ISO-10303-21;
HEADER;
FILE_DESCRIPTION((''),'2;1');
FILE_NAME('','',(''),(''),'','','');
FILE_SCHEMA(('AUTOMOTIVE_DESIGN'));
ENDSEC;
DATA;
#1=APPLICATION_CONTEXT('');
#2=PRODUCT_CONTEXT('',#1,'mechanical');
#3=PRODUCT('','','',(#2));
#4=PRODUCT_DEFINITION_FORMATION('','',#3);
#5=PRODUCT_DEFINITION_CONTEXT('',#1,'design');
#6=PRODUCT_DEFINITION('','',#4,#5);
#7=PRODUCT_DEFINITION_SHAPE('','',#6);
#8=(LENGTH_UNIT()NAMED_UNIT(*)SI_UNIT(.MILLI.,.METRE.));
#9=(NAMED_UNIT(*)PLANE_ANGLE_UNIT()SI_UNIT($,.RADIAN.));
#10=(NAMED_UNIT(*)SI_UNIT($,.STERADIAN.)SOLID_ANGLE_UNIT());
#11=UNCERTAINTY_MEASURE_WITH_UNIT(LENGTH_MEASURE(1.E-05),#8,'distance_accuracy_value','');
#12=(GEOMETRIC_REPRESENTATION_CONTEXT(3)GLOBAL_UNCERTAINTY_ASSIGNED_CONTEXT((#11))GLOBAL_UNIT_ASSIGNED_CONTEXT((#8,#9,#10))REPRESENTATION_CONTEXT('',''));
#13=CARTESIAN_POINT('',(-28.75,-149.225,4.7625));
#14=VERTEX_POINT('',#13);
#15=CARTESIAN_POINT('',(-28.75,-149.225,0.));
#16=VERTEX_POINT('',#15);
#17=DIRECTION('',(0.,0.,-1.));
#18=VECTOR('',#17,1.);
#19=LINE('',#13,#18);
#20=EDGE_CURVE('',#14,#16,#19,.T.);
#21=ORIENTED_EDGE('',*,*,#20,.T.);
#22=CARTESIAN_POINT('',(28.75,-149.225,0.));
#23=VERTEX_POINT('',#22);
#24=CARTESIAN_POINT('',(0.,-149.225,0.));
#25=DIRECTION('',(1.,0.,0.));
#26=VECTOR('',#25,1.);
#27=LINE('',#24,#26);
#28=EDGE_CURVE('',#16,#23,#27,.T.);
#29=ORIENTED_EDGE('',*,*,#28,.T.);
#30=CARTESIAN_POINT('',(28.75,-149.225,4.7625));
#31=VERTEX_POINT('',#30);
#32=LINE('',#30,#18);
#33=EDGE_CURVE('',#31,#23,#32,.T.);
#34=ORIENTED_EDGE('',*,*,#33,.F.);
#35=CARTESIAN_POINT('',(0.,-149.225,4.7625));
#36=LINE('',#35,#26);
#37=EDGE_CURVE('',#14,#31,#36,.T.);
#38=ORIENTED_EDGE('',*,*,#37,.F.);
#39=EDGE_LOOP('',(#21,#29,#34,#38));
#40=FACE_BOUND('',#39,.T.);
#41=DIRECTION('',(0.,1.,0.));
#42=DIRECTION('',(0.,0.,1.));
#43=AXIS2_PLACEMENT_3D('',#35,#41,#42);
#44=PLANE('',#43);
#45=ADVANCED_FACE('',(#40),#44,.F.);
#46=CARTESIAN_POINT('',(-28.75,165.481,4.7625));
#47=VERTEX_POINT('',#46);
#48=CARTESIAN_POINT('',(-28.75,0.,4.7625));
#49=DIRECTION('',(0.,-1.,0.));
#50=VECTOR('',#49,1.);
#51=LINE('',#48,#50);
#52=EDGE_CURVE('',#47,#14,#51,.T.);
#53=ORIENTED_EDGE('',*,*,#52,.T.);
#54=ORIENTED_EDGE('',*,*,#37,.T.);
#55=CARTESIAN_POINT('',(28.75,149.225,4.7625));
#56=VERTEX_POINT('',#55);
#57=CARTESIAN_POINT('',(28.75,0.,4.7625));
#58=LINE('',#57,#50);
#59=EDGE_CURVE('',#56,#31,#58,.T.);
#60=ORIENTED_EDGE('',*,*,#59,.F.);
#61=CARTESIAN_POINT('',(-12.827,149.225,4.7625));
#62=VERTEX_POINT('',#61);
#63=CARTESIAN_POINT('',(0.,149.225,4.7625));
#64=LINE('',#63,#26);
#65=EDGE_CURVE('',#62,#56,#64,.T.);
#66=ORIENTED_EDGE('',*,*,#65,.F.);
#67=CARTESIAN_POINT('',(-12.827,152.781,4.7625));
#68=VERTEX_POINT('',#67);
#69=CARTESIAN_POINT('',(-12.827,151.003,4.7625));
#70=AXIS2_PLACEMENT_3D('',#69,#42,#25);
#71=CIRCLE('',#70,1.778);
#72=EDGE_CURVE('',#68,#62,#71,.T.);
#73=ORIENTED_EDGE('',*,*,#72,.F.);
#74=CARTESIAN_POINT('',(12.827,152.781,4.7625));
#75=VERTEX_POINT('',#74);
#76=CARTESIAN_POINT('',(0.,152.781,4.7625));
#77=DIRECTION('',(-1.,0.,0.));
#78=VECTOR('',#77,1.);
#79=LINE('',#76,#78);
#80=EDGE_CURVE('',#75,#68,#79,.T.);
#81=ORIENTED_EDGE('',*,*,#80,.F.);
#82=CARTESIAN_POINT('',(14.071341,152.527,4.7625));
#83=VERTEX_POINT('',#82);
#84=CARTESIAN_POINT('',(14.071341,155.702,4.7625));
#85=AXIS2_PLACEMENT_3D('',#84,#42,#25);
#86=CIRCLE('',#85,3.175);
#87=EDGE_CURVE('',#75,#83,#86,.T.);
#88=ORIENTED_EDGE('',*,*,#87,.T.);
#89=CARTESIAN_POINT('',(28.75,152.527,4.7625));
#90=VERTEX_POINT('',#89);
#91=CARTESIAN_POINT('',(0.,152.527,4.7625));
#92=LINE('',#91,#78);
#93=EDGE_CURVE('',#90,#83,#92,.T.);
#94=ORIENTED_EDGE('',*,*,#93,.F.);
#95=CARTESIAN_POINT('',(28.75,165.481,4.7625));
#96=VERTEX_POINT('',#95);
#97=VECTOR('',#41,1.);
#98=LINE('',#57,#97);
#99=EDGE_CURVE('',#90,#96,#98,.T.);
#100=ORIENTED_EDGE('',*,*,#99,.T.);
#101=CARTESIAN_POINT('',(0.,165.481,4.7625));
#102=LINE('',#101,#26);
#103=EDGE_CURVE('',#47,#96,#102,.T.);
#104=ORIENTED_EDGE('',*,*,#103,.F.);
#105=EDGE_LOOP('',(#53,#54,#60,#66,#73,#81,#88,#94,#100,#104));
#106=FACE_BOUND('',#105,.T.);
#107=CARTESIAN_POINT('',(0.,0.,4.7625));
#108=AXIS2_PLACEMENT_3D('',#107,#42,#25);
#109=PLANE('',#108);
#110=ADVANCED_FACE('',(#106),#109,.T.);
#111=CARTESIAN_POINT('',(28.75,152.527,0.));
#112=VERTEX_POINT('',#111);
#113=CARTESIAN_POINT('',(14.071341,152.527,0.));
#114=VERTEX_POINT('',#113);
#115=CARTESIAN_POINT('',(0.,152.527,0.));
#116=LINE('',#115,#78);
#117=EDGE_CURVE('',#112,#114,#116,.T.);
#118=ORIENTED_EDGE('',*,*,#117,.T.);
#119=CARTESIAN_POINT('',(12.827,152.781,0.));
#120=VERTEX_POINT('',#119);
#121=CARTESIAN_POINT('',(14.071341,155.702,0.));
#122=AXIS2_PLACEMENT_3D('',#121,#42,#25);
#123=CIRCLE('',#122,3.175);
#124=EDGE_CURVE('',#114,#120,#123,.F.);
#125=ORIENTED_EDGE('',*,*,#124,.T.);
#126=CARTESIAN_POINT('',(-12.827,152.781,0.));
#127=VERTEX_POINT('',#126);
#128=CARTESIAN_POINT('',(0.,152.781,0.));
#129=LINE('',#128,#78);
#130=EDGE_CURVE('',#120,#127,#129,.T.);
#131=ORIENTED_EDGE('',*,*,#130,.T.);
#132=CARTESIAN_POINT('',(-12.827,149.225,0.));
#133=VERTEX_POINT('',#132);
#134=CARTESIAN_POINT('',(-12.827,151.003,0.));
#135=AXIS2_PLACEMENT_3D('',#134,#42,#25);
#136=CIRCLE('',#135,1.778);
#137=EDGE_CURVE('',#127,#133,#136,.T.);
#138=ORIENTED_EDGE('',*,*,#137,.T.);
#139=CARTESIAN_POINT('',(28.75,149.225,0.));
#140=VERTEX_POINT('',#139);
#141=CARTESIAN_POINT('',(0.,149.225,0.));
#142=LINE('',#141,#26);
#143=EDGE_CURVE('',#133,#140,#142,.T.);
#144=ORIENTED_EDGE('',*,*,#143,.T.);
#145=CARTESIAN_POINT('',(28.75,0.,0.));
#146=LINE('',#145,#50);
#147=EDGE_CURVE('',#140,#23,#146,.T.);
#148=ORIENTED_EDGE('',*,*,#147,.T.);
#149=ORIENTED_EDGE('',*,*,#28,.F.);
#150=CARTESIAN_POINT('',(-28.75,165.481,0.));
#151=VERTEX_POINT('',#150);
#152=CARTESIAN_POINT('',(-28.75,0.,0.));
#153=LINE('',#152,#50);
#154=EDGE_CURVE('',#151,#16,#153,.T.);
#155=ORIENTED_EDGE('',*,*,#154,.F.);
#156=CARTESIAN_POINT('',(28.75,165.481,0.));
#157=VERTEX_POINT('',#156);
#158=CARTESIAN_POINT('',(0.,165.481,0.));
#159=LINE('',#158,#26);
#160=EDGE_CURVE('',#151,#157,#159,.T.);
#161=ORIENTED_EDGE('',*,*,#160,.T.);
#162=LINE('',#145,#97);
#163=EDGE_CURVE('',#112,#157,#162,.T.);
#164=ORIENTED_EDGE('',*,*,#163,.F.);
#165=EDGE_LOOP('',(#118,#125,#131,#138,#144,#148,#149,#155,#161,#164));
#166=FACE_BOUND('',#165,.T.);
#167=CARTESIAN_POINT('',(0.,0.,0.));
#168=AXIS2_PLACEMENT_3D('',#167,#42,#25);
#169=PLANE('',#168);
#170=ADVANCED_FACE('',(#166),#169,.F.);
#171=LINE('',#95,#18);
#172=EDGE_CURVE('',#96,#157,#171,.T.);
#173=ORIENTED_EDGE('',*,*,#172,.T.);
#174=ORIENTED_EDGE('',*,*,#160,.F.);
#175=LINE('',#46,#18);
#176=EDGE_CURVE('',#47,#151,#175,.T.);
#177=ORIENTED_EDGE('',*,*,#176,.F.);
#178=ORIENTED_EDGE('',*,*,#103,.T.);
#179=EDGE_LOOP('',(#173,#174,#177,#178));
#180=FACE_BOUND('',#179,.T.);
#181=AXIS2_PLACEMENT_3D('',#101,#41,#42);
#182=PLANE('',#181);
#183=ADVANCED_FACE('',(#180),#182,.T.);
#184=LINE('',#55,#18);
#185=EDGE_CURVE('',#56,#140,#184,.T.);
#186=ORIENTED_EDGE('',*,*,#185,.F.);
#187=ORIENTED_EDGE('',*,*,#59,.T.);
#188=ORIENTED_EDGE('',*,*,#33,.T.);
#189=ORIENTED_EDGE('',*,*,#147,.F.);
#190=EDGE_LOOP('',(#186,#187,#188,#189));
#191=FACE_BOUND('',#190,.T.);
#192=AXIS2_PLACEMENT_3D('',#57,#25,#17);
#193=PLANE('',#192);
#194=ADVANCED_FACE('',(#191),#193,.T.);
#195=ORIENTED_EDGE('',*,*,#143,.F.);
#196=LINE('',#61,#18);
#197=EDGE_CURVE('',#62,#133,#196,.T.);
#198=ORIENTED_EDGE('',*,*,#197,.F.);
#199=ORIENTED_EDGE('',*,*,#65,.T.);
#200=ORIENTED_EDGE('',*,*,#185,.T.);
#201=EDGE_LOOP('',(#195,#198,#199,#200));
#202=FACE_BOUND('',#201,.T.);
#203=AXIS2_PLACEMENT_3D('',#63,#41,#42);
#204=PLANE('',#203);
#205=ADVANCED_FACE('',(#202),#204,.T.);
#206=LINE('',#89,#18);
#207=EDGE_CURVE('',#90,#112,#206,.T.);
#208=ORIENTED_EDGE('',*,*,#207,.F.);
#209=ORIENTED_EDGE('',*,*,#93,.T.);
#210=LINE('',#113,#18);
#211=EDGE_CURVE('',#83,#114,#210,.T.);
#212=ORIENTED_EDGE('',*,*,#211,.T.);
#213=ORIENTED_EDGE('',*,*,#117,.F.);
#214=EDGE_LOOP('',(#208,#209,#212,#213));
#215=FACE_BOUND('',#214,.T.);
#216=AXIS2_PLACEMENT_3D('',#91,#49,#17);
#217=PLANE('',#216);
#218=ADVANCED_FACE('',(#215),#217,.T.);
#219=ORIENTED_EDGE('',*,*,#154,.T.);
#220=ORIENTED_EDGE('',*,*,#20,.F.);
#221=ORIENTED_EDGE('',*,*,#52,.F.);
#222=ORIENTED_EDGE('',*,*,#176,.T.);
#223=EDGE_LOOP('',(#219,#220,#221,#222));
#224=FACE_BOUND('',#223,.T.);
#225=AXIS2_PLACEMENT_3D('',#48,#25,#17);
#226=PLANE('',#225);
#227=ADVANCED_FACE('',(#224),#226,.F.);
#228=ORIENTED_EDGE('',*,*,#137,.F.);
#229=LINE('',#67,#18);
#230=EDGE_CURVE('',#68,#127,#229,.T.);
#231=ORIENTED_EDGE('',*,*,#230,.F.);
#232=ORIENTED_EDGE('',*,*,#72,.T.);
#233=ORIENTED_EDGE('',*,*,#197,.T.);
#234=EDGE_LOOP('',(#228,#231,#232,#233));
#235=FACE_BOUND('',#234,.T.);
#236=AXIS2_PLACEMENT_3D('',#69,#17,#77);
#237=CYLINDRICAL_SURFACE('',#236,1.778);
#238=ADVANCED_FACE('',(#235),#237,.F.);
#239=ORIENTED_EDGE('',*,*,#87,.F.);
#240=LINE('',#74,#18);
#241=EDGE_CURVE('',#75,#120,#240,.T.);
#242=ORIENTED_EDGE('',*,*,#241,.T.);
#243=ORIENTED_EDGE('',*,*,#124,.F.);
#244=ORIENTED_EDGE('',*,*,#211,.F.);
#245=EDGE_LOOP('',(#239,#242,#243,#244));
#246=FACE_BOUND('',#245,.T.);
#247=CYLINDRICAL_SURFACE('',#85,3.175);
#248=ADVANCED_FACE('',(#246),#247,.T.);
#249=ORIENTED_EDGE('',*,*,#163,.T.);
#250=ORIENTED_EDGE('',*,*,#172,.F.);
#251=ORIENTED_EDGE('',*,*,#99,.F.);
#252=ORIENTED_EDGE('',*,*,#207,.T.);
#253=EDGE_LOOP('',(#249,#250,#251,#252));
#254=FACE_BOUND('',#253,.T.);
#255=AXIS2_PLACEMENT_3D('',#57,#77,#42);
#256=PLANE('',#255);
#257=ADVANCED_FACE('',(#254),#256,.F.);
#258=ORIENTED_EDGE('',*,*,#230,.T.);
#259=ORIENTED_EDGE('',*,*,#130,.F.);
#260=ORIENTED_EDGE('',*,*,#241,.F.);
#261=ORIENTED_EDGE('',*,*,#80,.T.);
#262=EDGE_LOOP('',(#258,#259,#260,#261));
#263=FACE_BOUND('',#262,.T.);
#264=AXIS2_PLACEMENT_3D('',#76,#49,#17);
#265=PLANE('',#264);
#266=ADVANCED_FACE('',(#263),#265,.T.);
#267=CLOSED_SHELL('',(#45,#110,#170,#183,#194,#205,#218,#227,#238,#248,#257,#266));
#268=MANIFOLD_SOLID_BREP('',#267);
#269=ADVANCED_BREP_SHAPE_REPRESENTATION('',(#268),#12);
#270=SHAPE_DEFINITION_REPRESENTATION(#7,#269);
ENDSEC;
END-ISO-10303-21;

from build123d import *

# Parameters (mm, degrees)
BOSS_EXTRUDE1_DEPTH = 4.7625
FILLET1_R           = 3.175


with BuildPart() as part:
    # Sketch1 → Boss-Extrude1 (new body)
    with BuildSketch(Plane.XY):
        with BuildLine():
            Line((-28.75, 165.481), (-28.75, 149.225))
            Line((-28.75, 149.225), (-12.827, 149.225))
            ThreePointArc((-12.827, 149.225), (-14.605, 151.003), (-12.827, 152.781))
            Line((-12.827, 152.781), (12.827, 152.781))
            Line((12.827, 152.781), (12.827, 152.527))
            Line((12.827, 152.527), (28.75, 152.527))
            Line((28.75, 152.527), (28.75, 165.481))
            Line((28.75, 165.481), (-28.75, 165.481))
        make_face()
        Polygon((-12.827, 149.225), (-28.75, 149.225), (-28.75, -149.225), (28.75, -149.225), (28.75, 149.225), align=None)
    extrude(amount=BOSS_EXTRUDE1_DEPTH)

    # Fillet1
    # the kernel refuses this fillet: 3.175 mm, written as the material it takes off along each edge
    with BuildSketch(Plane(origin=(12.827, 152.527, -3.110851973), x_dir=(1, 0, 0), z_dir=(0, 0, 1))) as fillet1_piece_1:
        with BuildLine():
            CenterArc((1.244340789, 3.175), FILLET1_R, 246.926081934, 23.073918066)
            Line((0, 0.254), (-0.024886816, 0.19558))
            ThreePointArc((-0.024886816, 0.19558), (-0.0635, 0.127), (-0.0635, 0))
            Line((-0.0635, 0), (0, -0.0635))
            Line((0, -0.0635), (1.244340789, -0.0635))
            Line((1.244340789, -0.0635), (1.244340789, 0))
        make_face()
    extrude(amount=10.984203947, mode=Mode.SUBTRACT)


solid = part.part
